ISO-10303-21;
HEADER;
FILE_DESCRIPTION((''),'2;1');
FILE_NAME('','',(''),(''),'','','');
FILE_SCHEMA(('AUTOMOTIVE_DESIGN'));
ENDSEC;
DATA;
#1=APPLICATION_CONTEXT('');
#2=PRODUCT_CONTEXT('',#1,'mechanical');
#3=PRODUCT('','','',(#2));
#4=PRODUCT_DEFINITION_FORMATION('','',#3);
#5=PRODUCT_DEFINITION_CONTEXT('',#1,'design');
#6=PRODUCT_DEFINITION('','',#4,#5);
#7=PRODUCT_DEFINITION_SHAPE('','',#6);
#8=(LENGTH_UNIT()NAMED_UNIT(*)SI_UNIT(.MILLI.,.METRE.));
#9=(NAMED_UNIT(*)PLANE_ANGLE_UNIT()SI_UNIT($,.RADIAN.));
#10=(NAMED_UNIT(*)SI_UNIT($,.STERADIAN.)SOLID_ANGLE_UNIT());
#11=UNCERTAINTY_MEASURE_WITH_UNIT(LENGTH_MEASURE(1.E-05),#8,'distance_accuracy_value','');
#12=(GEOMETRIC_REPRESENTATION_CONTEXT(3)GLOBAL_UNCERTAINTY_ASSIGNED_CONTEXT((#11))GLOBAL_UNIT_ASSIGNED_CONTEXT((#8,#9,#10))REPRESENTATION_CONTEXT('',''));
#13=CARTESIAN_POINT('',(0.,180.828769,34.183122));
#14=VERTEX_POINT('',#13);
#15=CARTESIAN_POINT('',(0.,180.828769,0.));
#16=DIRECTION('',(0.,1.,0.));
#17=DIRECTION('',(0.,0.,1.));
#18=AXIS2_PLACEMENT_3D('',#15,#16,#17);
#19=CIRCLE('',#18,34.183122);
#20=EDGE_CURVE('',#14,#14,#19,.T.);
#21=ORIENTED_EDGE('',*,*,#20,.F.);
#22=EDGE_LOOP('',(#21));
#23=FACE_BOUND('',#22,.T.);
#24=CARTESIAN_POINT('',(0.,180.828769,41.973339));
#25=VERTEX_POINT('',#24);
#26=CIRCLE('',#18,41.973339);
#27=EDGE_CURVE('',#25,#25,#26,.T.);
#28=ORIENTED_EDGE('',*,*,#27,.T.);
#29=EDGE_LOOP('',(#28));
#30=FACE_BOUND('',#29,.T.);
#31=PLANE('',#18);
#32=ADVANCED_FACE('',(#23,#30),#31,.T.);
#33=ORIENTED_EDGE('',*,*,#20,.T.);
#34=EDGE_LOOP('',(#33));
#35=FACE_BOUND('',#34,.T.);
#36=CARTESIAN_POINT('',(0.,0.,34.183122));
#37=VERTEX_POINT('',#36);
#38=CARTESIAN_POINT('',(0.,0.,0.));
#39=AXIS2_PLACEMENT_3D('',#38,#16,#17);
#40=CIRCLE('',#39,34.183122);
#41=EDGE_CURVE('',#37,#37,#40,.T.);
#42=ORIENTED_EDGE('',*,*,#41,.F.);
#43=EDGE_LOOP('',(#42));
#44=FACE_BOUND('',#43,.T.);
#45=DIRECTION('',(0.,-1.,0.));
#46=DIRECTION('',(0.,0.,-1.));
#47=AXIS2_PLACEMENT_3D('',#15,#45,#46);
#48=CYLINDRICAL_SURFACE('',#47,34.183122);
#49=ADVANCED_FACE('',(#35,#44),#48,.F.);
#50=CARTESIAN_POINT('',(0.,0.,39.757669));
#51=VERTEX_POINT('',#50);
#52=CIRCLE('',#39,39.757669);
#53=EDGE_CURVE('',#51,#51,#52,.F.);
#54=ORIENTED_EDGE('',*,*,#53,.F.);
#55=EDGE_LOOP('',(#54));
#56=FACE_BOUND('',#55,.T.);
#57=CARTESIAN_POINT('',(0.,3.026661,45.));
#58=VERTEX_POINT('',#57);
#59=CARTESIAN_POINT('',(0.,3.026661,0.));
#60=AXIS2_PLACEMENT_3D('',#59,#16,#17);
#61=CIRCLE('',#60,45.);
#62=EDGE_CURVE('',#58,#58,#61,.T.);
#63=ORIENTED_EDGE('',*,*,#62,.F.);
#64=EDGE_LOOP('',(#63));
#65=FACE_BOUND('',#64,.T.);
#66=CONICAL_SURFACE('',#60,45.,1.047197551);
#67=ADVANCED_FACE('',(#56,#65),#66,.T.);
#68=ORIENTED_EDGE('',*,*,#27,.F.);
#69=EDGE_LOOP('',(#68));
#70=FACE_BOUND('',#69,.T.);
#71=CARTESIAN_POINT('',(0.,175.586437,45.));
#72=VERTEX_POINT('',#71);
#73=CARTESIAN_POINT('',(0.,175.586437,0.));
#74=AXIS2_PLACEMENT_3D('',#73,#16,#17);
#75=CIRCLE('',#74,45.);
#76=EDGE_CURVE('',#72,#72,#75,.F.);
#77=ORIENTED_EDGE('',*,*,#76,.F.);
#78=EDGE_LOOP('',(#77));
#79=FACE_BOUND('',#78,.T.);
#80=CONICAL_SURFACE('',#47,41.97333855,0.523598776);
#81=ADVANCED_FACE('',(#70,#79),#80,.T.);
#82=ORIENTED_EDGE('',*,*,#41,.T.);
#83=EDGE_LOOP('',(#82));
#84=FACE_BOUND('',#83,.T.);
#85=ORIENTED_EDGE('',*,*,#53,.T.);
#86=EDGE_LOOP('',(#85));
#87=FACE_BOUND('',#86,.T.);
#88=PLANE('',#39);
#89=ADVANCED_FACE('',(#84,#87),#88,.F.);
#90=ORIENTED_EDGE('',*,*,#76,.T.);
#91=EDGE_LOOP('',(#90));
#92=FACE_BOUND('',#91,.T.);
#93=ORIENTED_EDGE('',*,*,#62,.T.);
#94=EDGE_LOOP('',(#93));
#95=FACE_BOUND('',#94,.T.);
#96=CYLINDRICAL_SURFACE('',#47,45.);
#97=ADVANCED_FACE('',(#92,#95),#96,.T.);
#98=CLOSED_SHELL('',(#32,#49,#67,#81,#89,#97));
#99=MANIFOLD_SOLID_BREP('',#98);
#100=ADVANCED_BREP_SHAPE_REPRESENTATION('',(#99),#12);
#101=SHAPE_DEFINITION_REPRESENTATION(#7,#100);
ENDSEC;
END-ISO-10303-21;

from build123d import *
from OCP.BRepFilletAPI import BRepFilletAPI_MakeChamfer

# Parameters (mm, degrees)
SKETCH1_R           = 45
BOSS_EXTRUDE1_DEPTH = 180.828768563
SKETCH2_R           = 34.183121844
CUT_EXTRUDE1_DEPTH  = 192.700400469
CHAMFER1_SIZE       = 5.242331409
CHAMFER1_SIZE2      = 3.02666145


with BuildPart() as part:
    # Sketch1 → Boss-Extrude1 (new body)
    with BuildSketch(Plane(origin=(0, 0, 0), x_dir=(1, 0, 0), z_dir=(0, 1, 0))):
        Circle(SKETCH1_R)
    extrude(amount=BOSS_EXTRUDE1_DEPTH)

    # Sketch2 → Cut-Extrude1 (cut, through all)
    with BuildSketch(Plane(origin=(0, 0, 0), x_dir=(1, 0, 0), z_dir=(0, 1, 0))):
        Circle(SKETCH2_R)
    extrude(amount=CUT_EXTRUDE1_DEPTH, mode=Mode.SUBTRACT)

    # Chamfer1: one chamfer whose edges measure the first distance from different faces: ONE call of the kernel's chamfer builder (chamfer() names one face for all edges)
    chamfer1_edges_1 = [part.edges().sort_by_distance(p)[0] for p in [
        (-45, 180.828768563, 0),
    ]]
    chamfer1_side_1 = [part.faces().sort_by_distance(p)[0] for p in [
        (-45, 90.414384281, 0),
    ]]
    chamfer1_edges_2 = [part.edges().sort_by_distance(p)[0] for p in [
        (-45, 0, 0),
    ]]
    chamfer1_side_2 = [part.faces().sort_by_distance(p)[0] for p in [
        (-43.727207794, 0, 0),
    ]]
    chamfer1 = BRepFilletAPI_MakeChamfer(part.part.solid().wrapped)
    for e in chamfer1_edges_1:
        chamfer1.Add(CHAMFER1_SIZE, CHAMFER1_SIZE2, e.wrapped, chamfer1_side_1[0].wrapped)  # the first distance lies on this face
    for e in chamfer1_edges_2:
        chamfer1.Add(CHAMFER1_SIZE, CHAMFER1_SIZE2, e.wrapped, chamfer1_side_2[0].wrapped)  # the first distance lies on this face
    add(Compound.cast(chamfer1.Shape()), mode=Mode.REPLACE)


solid = part.part
